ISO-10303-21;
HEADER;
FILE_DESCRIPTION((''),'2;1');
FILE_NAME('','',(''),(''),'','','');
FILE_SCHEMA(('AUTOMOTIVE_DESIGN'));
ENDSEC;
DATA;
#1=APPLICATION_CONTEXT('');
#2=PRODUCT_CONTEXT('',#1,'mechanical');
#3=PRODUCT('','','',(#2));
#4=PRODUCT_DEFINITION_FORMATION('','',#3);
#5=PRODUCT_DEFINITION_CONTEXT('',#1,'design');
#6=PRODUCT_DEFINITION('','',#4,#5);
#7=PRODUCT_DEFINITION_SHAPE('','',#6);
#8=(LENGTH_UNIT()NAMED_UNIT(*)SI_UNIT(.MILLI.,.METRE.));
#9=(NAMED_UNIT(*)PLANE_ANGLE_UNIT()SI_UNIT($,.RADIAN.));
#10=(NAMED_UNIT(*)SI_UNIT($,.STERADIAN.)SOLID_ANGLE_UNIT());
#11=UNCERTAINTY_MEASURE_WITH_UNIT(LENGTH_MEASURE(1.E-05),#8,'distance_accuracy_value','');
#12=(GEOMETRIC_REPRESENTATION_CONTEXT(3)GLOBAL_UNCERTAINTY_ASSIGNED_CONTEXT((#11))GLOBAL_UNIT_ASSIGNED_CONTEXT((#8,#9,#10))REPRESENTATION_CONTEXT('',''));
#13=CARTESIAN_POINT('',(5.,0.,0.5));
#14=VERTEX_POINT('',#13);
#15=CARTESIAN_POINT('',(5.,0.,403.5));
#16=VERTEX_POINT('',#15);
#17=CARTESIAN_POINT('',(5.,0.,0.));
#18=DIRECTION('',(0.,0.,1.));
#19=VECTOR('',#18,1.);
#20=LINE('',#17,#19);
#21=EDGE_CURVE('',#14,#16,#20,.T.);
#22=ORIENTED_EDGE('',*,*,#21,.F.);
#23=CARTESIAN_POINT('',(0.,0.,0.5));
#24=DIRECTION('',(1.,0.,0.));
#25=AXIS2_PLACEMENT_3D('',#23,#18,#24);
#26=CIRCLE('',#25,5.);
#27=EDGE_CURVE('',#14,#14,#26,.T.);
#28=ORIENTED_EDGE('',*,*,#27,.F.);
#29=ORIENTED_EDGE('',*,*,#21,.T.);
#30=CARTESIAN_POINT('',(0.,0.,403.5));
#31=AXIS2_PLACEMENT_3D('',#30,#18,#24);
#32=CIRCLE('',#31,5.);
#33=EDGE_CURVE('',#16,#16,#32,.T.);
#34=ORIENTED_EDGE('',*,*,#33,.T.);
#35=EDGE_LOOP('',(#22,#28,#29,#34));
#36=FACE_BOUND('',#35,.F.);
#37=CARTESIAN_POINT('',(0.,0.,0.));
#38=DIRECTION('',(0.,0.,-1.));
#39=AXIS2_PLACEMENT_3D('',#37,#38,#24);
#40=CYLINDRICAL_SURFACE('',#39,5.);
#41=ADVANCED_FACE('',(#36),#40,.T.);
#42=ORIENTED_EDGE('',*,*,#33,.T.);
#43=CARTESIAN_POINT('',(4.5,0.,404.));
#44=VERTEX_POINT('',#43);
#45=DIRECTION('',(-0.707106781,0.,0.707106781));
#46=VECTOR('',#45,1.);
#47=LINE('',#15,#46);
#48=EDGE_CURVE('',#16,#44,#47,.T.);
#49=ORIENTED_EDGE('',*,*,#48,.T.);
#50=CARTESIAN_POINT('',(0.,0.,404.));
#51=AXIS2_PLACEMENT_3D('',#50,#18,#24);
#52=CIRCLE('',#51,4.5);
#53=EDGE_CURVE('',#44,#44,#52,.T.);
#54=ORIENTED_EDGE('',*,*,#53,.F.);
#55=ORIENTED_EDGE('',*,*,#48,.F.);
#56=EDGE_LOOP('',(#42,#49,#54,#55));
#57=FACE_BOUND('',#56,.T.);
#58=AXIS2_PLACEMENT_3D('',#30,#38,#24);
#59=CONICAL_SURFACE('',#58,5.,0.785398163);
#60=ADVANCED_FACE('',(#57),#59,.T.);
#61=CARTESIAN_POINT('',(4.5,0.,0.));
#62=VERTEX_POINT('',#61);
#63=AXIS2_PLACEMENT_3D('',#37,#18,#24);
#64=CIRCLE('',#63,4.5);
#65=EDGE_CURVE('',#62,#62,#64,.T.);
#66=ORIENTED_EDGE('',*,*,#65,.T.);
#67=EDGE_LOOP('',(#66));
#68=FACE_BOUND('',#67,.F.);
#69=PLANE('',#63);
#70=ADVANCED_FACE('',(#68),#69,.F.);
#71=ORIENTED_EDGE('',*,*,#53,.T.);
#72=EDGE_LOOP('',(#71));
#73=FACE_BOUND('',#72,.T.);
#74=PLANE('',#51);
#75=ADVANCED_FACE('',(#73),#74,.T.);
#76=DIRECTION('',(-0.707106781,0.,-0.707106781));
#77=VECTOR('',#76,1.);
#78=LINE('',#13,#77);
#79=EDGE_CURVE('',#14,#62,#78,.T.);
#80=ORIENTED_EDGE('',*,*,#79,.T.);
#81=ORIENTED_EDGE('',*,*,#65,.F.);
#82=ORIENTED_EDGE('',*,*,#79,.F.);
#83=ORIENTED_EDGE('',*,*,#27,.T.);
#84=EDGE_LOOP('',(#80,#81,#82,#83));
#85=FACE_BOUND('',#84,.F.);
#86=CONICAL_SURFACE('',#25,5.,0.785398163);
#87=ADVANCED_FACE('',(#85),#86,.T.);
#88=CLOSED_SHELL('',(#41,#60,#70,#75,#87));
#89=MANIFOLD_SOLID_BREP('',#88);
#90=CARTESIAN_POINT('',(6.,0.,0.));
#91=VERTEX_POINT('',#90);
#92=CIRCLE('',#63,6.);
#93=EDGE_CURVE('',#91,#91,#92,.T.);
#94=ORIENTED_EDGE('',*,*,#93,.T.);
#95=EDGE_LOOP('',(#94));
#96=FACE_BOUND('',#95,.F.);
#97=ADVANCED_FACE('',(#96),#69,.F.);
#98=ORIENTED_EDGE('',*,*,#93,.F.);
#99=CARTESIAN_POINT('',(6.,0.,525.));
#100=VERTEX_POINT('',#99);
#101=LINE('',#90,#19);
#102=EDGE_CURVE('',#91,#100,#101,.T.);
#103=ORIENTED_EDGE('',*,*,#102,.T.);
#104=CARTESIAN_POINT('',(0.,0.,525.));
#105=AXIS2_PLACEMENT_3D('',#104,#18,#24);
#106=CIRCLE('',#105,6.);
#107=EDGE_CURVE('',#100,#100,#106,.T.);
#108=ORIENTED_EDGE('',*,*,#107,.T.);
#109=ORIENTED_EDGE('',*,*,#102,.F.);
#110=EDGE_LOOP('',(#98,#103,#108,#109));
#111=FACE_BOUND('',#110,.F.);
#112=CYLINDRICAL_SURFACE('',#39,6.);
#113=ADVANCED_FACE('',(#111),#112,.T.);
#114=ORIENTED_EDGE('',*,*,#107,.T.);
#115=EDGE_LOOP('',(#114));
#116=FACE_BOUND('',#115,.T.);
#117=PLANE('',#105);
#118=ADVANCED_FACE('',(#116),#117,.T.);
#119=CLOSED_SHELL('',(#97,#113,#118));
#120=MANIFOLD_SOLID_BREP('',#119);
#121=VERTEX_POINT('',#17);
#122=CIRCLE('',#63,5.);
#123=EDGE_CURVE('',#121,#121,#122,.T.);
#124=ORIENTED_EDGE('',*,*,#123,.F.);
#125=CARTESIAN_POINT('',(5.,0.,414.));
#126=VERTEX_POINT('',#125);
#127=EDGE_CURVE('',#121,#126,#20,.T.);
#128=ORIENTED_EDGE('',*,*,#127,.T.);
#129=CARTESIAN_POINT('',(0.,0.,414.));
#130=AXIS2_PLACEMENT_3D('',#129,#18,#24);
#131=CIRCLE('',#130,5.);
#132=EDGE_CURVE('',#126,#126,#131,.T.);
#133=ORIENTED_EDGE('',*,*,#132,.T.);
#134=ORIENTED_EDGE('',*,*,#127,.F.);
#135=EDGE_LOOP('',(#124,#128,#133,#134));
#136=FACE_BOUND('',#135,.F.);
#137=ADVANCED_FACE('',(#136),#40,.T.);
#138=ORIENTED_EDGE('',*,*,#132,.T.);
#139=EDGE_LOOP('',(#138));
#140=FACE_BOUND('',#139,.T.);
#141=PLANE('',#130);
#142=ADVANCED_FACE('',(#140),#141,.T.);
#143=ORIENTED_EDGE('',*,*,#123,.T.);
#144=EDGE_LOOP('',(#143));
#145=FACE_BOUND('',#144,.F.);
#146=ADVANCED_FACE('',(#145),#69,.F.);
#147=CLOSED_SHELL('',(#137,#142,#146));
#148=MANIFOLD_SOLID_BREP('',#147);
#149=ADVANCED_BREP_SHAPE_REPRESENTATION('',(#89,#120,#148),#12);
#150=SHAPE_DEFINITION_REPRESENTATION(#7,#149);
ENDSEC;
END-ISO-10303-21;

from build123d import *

# Parameters (mm, degrees)
F0_R     = 6
F0_R_2   = 5
F1_DEPTH = 525
F2_DEPTH = 404
F3_SIZE  = 0.5
F4_DEPTH = 414


with BuildPart() as f1:
    # F0 (on Top) → F1 (new body)
    with BuildSketch(Plane.XY):
        Circle(F0_R)
        Circle(F0_R_2, mode=Mode.SUBTRACT)
        Circle(F0_R_2)
    extrude(amount=F1_DEPTH)


with BuildPart() as f2:
    # F0 (on Top) → F2 (new body)
    with BuildSketch(Plane.XY):
        Circle(F0_R_2)
    extrude(amount=F2_DEPTH)

    # F3
    f3_edges = [f2.edges().sort_by_distance(p)[0] for p in [
        (-5, 0, 0),
        (-5, 0, 404),
    ]]
    chamfer(f3_edges, length=F3_SIZE)


with BuildPart() as f4:
    # F0 (on Top) → F4 (new body)
    with BuildSketch(Plane.XY):
        Circle(F0_R_2)
    extrude(amount=F4_DEPTH)


solid = Compound([f1.part, f2.part, f4.part])
